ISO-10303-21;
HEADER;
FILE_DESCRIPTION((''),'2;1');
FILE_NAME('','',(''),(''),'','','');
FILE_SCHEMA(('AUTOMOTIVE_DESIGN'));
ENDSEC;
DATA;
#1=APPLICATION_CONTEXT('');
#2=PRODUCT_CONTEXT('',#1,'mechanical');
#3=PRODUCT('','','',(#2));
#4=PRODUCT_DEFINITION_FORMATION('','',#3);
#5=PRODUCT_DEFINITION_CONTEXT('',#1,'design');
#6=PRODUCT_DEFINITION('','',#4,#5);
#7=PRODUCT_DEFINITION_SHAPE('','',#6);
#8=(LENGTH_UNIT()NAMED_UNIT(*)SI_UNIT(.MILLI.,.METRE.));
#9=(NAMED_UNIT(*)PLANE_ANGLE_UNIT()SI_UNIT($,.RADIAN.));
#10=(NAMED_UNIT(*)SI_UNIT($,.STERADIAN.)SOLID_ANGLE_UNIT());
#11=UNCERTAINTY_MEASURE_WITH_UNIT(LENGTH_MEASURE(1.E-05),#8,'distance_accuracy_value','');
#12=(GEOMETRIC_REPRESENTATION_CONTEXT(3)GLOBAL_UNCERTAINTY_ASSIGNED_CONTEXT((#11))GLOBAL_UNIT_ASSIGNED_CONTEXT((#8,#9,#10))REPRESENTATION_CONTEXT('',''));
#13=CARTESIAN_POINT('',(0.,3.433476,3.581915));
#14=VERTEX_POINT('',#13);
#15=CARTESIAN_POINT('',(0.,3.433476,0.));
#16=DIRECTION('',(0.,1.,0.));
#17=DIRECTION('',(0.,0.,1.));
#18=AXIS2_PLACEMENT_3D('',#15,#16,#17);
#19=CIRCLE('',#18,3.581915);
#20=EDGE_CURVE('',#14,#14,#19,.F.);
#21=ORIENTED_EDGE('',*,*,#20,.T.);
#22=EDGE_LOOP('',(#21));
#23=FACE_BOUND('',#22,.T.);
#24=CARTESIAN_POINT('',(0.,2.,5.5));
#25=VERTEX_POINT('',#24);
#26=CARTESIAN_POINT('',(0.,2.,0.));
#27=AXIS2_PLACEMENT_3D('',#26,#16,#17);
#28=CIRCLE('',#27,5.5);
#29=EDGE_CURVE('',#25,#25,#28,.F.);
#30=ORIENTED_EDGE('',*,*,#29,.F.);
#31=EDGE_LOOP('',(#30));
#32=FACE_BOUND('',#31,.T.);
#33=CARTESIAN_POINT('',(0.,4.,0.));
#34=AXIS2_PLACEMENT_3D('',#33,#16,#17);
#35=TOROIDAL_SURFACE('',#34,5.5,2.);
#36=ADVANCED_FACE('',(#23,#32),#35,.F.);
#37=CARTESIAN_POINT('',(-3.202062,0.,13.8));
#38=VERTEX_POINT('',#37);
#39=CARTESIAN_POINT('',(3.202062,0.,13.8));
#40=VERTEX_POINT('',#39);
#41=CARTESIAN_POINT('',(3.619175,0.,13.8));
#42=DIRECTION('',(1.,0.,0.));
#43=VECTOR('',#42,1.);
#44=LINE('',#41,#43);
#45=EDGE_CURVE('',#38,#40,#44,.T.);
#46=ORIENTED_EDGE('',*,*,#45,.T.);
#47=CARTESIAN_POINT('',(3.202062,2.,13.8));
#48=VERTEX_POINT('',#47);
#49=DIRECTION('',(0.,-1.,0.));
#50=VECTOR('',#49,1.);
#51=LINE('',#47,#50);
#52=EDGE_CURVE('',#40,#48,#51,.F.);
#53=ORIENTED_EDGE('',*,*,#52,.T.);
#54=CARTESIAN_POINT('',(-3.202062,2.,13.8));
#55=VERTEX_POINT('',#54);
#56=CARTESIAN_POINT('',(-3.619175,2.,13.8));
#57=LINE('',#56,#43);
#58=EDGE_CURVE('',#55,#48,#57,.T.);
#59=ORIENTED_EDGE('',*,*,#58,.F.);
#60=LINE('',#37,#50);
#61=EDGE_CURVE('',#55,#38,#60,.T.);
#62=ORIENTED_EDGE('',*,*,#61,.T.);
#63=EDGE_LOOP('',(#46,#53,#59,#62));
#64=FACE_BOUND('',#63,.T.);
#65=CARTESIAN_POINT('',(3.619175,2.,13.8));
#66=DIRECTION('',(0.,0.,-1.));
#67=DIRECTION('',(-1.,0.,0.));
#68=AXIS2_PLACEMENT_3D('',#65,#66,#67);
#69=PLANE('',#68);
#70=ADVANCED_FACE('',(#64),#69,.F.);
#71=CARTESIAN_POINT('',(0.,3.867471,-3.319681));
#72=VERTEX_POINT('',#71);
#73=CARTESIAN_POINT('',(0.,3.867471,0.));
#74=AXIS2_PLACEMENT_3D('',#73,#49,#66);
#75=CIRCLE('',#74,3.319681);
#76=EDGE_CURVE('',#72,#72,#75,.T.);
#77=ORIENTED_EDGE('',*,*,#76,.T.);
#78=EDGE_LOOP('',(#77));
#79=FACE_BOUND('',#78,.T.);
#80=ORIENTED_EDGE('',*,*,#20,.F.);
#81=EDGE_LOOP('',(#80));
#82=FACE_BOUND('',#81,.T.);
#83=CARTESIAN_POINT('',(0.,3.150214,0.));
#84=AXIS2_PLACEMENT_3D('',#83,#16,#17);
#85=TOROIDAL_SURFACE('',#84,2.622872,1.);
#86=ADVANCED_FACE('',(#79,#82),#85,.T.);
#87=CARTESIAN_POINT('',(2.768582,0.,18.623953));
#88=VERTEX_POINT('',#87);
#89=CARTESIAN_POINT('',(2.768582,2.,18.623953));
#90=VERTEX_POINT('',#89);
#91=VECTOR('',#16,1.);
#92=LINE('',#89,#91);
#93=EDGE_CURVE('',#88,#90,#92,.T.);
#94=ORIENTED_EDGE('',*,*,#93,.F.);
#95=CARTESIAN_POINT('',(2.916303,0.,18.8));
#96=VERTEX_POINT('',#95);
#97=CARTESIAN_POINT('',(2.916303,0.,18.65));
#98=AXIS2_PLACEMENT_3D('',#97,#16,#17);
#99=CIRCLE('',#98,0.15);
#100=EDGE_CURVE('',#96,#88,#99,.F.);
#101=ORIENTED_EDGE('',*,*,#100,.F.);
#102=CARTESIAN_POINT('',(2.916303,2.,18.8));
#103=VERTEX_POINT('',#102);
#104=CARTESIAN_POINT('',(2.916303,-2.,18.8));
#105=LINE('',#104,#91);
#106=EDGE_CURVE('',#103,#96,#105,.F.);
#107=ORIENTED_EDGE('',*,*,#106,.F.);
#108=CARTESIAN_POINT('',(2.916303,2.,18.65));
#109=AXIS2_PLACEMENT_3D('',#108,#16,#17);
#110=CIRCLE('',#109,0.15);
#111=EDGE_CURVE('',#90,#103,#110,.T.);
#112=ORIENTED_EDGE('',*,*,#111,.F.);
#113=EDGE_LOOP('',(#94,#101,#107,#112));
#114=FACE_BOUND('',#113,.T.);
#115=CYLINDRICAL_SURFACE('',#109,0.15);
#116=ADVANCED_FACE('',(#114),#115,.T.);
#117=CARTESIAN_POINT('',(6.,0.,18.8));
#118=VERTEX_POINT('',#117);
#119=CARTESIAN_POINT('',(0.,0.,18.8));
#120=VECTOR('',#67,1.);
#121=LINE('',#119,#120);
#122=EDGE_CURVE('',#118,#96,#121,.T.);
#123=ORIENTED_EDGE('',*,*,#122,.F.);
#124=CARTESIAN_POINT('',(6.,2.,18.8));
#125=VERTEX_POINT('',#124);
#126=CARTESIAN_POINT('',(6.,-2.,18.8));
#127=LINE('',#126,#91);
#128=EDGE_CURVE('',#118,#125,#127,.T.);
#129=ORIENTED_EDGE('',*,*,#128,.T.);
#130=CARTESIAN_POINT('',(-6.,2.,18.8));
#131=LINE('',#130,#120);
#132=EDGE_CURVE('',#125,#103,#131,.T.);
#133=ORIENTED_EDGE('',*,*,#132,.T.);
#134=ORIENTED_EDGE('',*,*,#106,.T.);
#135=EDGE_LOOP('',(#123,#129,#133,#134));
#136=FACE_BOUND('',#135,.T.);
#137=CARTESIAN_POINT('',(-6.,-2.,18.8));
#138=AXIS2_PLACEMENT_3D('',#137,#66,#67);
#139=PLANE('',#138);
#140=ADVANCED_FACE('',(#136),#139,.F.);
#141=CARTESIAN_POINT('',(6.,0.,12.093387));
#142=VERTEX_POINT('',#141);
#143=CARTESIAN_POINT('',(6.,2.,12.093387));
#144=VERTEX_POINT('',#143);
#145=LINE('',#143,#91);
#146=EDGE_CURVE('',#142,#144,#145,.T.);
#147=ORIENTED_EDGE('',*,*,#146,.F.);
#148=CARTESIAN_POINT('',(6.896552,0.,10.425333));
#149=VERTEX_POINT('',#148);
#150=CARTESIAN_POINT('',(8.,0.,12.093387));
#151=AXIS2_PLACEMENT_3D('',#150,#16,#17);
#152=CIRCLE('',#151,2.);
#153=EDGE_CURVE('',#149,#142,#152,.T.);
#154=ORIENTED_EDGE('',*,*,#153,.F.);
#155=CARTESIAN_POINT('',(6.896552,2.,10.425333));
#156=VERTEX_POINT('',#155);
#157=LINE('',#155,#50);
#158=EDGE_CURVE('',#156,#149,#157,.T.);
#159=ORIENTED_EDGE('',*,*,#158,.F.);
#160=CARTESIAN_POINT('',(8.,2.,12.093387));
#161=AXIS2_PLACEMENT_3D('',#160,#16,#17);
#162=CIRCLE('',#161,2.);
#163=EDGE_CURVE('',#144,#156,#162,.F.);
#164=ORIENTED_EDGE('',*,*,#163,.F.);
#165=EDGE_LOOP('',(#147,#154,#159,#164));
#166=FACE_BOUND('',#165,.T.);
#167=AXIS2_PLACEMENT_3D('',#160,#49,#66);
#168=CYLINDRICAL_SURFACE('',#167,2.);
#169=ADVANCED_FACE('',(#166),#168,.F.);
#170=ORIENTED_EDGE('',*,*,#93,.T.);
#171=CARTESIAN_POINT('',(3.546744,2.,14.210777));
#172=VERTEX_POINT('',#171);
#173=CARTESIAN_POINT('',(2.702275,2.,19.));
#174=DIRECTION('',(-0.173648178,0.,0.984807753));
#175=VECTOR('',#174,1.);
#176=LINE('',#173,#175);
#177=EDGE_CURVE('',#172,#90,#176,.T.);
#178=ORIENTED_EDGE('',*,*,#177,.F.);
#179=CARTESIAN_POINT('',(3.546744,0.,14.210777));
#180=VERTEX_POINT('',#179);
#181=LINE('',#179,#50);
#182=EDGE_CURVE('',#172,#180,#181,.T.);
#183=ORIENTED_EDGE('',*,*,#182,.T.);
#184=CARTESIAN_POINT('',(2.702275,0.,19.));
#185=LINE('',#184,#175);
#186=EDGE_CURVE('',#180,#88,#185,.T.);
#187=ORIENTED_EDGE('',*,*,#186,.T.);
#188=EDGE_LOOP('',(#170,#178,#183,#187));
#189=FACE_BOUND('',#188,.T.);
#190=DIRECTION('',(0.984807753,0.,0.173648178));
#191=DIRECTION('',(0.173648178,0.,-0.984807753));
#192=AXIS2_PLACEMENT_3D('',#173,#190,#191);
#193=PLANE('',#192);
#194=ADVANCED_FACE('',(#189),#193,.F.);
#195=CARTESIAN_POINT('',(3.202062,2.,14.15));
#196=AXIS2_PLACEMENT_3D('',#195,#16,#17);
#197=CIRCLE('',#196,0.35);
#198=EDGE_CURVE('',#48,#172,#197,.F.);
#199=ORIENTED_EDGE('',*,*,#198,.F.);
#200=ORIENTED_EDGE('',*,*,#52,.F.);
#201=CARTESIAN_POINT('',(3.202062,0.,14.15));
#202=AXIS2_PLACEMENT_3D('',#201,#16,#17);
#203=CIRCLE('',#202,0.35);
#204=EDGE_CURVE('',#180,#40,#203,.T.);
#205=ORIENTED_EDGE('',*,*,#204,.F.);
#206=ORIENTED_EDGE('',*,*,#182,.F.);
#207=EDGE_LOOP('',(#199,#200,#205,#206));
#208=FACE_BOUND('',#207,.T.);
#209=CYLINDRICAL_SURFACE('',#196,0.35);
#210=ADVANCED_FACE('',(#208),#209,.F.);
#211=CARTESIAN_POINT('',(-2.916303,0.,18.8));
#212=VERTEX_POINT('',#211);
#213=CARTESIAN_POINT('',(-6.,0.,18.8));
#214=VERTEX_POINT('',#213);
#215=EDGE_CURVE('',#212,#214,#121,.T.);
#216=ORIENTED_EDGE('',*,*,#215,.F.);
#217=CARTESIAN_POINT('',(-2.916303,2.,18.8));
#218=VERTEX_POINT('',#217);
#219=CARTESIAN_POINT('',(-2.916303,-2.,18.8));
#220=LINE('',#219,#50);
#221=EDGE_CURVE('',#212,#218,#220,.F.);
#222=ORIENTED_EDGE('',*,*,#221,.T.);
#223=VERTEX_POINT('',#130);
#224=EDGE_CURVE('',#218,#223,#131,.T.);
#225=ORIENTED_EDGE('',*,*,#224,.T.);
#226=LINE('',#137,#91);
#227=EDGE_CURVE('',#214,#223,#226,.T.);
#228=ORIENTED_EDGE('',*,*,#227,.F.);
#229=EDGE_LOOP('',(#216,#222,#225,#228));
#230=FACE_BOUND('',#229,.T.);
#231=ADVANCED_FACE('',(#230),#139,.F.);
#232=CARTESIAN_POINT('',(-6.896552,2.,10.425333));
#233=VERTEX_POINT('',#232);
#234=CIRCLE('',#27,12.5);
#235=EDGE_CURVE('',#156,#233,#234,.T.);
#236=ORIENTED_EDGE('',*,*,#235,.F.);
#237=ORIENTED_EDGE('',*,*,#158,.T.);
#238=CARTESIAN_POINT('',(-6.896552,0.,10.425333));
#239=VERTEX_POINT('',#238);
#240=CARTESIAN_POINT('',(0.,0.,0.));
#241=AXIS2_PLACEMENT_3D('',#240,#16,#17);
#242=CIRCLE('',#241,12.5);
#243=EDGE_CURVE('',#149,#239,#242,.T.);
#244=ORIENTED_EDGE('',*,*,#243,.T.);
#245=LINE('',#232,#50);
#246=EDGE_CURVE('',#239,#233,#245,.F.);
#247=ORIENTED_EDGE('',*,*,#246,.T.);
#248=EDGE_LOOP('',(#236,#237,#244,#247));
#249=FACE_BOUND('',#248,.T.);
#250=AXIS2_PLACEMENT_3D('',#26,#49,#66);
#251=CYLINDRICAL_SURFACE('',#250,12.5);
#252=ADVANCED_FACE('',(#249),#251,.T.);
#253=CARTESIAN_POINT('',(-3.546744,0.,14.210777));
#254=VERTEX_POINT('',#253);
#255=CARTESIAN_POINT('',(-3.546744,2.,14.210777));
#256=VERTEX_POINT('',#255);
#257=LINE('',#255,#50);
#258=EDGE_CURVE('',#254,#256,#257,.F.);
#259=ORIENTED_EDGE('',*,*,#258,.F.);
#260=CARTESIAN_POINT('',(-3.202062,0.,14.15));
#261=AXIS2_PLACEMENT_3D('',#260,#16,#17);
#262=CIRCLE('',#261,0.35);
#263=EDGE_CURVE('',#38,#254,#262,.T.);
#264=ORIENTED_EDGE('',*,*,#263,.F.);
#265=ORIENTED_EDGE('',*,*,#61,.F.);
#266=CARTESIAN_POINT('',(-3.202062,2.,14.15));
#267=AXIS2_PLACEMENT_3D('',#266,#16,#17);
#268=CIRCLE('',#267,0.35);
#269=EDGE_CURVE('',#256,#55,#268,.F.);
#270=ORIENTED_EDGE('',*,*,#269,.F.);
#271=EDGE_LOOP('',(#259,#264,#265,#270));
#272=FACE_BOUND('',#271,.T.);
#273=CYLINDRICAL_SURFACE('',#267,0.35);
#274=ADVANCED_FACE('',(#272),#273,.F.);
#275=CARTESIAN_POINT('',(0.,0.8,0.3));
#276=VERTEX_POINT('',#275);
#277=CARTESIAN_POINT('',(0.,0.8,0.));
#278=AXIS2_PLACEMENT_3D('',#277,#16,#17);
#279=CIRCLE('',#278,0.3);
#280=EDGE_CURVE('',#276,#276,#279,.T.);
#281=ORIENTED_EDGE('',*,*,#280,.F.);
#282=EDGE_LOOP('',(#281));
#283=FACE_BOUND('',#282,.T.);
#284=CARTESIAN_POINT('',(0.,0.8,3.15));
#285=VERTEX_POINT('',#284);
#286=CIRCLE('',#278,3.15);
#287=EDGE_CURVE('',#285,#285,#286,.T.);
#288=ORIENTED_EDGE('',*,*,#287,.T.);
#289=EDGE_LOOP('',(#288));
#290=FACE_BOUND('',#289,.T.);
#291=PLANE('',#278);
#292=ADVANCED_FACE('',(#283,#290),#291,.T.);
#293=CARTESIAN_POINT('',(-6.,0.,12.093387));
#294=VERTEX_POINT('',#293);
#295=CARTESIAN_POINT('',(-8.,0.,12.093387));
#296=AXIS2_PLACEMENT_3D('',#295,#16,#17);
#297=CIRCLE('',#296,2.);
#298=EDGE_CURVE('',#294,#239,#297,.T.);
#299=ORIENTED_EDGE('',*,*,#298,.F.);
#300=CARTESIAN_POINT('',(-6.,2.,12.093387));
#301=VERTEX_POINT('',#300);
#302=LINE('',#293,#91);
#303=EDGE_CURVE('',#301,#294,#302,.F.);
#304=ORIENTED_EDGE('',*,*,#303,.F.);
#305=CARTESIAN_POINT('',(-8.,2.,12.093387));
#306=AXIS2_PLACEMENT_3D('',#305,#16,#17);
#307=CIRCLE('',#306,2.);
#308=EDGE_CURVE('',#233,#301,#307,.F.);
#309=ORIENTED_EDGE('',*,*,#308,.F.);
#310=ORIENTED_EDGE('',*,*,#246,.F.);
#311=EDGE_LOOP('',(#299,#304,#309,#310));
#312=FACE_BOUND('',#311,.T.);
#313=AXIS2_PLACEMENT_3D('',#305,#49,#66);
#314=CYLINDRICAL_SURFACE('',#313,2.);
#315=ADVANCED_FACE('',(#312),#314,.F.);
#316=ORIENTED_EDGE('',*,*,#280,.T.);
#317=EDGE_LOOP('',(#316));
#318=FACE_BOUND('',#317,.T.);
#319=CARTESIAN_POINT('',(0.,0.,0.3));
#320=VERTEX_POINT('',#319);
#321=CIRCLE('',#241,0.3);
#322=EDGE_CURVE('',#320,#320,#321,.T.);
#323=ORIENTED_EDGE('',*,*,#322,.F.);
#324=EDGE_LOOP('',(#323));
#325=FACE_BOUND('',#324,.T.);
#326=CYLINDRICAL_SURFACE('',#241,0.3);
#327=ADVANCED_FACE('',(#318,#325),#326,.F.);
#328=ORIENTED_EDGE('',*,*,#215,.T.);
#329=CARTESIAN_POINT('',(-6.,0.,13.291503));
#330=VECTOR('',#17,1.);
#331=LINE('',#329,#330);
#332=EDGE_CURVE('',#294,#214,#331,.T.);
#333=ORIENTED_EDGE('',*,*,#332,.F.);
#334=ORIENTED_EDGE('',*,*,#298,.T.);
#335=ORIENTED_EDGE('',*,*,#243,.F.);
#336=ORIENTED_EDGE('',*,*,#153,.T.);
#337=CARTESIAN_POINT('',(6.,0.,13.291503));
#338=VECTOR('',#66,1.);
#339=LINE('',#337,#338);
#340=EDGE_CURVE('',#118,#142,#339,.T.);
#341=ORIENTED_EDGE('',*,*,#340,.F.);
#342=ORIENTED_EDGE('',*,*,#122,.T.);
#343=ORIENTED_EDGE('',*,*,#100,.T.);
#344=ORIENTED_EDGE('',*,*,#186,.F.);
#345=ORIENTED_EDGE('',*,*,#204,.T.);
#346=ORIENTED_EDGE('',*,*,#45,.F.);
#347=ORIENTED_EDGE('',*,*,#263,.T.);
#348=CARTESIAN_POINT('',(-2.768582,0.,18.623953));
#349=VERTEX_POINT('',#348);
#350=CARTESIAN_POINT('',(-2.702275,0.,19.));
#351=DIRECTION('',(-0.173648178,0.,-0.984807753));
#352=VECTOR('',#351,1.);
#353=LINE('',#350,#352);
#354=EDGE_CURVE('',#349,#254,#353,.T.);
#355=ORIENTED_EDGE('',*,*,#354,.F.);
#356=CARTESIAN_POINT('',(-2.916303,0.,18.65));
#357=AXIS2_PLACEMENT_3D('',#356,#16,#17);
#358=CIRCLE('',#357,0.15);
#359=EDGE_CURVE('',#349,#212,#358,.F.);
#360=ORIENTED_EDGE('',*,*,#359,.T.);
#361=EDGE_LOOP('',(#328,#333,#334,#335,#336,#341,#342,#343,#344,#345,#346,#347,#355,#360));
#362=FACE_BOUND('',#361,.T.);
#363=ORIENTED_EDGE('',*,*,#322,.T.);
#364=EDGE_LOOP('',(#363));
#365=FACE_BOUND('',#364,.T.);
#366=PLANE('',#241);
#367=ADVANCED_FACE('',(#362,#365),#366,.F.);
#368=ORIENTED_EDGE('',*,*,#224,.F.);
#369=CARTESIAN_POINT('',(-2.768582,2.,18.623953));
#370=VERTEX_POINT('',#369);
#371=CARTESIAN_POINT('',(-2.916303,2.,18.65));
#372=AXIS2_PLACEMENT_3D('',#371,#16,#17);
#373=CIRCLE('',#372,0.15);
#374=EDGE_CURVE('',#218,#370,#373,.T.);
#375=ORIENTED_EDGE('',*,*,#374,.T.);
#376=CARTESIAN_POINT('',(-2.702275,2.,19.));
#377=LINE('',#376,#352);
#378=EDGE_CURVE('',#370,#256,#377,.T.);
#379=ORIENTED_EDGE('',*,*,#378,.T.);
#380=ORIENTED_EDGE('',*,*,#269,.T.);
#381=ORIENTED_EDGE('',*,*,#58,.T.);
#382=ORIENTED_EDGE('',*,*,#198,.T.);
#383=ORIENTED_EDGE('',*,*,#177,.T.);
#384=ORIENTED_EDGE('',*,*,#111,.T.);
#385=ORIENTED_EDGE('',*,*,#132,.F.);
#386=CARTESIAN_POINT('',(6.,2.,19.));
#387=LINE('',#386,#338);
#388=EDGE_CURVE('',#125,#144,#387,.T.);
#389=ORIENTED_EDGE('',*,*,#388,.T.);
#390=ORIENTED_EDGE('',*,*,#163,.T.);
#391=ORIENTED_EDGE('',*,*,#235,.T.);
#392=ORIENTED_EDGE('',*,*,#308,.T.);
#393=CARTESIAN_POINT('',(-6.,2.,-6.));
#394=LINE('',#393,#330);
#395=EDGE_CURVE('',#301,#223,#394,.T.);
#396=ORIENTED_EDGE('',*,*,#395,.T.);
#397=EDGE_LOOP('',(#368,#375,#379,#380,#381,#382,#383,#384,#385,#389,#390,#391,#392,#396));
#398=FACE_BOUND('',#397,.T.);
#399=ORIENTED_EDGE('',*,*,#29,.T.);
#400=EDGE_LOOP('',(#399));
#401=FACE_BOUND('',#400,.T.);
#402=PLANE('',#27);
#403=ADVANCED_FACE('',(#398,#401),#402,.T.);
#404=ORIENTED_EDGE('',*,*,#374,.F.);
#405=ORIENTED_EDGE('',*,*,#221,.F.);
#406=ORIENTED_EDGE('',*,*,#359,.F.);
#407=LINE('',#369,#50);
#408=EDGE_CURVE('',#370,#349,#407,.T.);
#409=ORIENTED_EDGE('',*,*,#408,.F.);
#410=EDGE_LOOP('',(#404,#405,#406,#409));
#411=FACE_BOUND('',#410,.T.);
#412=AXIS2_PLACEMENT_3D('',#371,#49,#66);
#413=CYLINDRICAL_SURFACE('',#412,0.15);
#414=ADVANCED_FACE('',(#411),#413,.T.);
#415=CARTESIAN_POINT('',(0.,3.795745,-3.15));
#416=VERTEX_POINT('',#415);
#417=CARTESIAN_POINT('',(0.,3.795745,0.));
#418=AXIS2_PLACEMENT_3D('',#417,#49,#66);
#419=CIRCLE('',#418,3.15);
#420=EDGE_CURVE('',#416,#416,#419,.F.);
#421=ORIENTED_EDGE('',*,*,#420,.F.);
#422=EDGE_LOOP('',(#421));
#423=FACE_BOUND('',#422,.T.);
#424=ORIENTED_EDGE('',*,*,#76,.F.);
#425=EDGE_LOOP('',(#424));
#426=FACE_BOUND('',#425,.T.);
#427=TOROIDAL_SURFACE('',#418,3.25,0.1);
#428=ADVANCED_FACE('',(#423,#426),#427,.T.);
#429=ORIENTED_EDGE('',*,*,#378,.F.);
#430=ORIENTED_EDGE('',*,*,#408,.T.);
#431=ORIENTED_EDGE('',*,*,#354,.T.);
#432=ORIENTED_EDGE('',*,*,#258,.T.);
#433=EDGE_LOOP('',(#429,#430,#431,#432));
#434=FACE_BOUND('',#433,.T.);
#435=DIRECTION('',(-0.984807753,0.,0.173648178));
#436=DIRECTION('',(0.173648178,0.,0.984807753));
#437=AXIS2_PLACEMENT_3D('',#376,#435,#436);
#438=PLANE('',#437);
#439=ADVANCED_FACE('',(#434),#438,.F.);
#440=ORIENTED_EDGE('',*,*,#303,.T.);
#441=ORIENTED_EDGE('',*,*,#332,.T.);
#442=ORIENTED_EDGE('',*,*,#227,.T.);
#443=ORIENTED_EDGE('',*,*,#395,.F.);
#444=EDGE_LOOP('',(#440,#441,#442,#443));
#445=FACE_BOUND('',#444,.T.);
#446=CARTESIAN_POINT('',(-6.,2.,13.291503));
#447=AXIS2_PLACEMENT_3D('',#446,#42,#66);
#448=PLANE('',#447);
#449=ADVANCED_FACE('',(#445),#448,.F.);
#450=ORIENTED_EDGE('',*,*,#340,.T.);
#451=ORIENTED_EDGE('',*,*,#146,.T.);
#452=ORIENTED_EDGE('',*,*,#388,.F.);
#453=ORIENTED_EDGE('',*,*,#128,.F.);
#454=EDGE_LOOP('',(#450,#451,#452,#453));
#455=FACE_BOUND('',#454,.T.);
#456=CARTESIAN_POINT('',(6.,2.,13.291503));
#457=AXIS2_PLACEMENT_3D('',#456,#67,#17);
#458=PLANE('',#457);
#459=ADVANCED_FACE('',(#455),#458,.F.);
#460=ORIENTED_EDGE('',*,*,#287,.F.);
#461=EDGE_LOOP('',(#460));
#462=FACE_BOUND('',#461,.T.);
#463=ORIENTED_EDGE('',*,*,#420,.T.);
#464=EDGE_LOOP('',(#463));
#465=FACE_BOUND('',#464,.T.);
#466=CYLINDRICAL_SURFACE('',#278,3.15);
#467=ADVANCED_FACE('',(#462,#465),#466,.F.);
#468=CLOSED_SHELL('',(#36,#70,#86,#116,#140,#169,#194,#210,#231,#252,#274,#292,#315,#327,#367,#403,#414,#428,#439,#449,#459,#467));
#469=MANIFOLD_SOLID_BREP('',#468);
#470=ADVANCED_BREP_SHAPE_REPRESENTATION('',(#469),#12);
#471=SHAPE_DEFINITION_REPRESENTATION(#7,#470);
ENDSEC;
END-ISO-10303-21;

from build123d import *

# Parameters (mm, degrees)
BOSS_EXTRUDE1_DEPTH = 2
SKETCH2_R           = 12.5
SKETCH2_R_2         = 3
BOSS_EXTRUDE2_DEPTH = 2
SKETCH4_W           = 12
SKETCH4_H           = 0.2
CUT_EXTRUDE1_DEPTH  = 4
FILLET3_R           = 0.35
FILLET4_R           = 0.15
FILLET6_R           = 2
SKETCH6_R           = 3.5
BOSS_EXTRUDE5_DEPTH = 2
SKETCH7_R           = 3.15
CUT_EXTRUDE3_DEPTH  = 3.2
FILLET7_R           = 2
FILLET8_R           = 1
FILLET9_R           = 0.1
SKETCH8_R           = 0.3
CUT_EXTRUDE4_DEPTH  = 23.787574965


# Some blends are built 0.0001 mm under size
with BuildPart() as part:
    # Sketch1 → Boss-Extrude1 (new body)
    with BuildSketch(Plane(origin=(0, 0, 0), x_dir=(1, 0, 0), z_dir=(0, 1, 0))):
        Polygon((-6, 6), (-6, -13.291502622), (-6, -19), (-2.70227506, -19), (-3.619175359, -13.8), (0, -13.8), (3.619175359, -13.8), (2.70227506, -19), (6, -19), (6, -13.291502622), (6, 6), align=None)
    extrude(amount=BOSS_EXTRUDE1_DEPTH)

    # Sketch2 → Boss-Extrude2 (add)
    with BuildSketch(Plane(origin=(0, 0, 0), x_dir=(1, 0, 0), z_dir=(0, 1, 0))):
        Circle(SKETCH2_R)
        Circle(SKETCH2_R_2, mode=Mode.SUBTRACT)
    extrude(amount=BOSS_EXTRUDE2_DEPTH)

    # Sketch4 → Cut-Extrude1 (cut)
    with BuildSketch(Plane(origin=(0, 2, 0), x_dir=(1, 0, 0), z_dir=(0, 1, 0))):
        with Locations((0, -18.9)):
            Rectangle(SKETCH4_W, SKETCH4_H)
    extrude(amount=-CUT_EXTRUDE1_DEPTH, mode=Mode.SUBTRACT)

    # Fillet3
    fillet3_edges = [part.edges().sort_by_distance(p)[0] for p in [
        (3.619175359, 1, 13.8),
        (-3.619175359, 1, 13.8),
    ]]
    fillet(fillet3_edges, radius=FILLET3_R)

    # Fillet4
    fillet4_edges = [part.edges().sort_by_distance(p)[0] for p in [
        (2.737540456, 1, 18.8),
        (-2.737540456, 1, 18.8),
    ]]
    fillet(fillet4_edges, radius=FILLET4_R)

    # Fillet6
    fillet6_edges = [part.edges().sort_by_distance(p)[0] for p in [
        (-6, 1, 10.9658561),
        (6, 1, 10.9658561),
    ]]
    fillet(fillet6_edges, radius=FILLET6_R)

    # Sketch6 → Boss-Extrude5 (add)
    with BuildSketch(Plane(origin=(0, 2, 0), x_dir=(1, 0, 0), z_dir=(0, 1, 0))):
        with Locations(Location((0, 0, 0), (0, 0, 270))):
            Circle(SKETCH6_R)
    extrude(amount=BOSS_EXTRUDE5_DEPTH)

    # Sketch7 → Cut-Extrude3 (cut)
    with BuildSketch(Plane(origin=(0, 4, 0), x_dir=(1, 0, 0), z_dir=(0, 1, 0))):
        with Locations(Location((0, 0, 0), (0, 0, 270))):
            Circle(SKETCH7_R)
    extrude(amount=-CUT_EXTRUDE3_DEPTH, mode=Mode.SUBTRACT)

    # Fillet7
    fillet7_edges = [part.edges().sort_by_distance(p)[0] for p in [
        (0, 2, -3.5),
    ]]
    fillet(fillet7_edges, radius=FILLET7_R - 0.0001)  # a hair under: the kernel refuses the full size

    # Fillet8
    # the kernel refuses this fillet: 1 mm, written as the material it takes off along each edge
    with BuildSketch(Plane(origin=(0, 4, 0), x_dir=(0, 0, 1), z_dir=(-1, 0, 0))) as fillet8_piece_1:
        with BuildLine():
            CenterArc((2.62284141, -0.849766921), FILLET8_R, 16.453180618, 41.733146886)
            Line((3.15, 0), (3.202715859, 0.084976692))
            ThreePointArc((3.202715859, 0.084976692), (3.325, 0.1), (3.5, 0.1))
            Line((3.5, 0.1), (3.6, 0))
            ThreePointArc((3.6, 0), (3.6, -0.0001), (3.677798058, -0.538211998))
            Line((3.677798058, -0.538211998), (3.581892908, -0.566535173))
        make_face()
    revolve(axis=Axis((0, 4, 0), (0, 1, 0)), mode=Mode.SUBTRACT)

    # Fillet9
    fillet9_edges = [part.edges().sort_by_distance(p)[0] for p in [
        (0, 4, -3.15),
    ]]
    fillet(fillet9_edges, radius=FILLET9_R)

    # Sketch8 → Cut-Extrude4 (cut, through all)
    with BuildSketch(Plane(origin=(0, 0.8, 0), x_dir=(1, 0, 0), z_dir=(0, 1, 0))):
        with Locations(Location((0, 0, 0), (0, 0, 270))):
            Circle(SKETCH8_R)
    extrude(amount=-CUT_EXTRUDE4_DEPTH, mode=Mode.SUBTRACT)


solid = part.part
